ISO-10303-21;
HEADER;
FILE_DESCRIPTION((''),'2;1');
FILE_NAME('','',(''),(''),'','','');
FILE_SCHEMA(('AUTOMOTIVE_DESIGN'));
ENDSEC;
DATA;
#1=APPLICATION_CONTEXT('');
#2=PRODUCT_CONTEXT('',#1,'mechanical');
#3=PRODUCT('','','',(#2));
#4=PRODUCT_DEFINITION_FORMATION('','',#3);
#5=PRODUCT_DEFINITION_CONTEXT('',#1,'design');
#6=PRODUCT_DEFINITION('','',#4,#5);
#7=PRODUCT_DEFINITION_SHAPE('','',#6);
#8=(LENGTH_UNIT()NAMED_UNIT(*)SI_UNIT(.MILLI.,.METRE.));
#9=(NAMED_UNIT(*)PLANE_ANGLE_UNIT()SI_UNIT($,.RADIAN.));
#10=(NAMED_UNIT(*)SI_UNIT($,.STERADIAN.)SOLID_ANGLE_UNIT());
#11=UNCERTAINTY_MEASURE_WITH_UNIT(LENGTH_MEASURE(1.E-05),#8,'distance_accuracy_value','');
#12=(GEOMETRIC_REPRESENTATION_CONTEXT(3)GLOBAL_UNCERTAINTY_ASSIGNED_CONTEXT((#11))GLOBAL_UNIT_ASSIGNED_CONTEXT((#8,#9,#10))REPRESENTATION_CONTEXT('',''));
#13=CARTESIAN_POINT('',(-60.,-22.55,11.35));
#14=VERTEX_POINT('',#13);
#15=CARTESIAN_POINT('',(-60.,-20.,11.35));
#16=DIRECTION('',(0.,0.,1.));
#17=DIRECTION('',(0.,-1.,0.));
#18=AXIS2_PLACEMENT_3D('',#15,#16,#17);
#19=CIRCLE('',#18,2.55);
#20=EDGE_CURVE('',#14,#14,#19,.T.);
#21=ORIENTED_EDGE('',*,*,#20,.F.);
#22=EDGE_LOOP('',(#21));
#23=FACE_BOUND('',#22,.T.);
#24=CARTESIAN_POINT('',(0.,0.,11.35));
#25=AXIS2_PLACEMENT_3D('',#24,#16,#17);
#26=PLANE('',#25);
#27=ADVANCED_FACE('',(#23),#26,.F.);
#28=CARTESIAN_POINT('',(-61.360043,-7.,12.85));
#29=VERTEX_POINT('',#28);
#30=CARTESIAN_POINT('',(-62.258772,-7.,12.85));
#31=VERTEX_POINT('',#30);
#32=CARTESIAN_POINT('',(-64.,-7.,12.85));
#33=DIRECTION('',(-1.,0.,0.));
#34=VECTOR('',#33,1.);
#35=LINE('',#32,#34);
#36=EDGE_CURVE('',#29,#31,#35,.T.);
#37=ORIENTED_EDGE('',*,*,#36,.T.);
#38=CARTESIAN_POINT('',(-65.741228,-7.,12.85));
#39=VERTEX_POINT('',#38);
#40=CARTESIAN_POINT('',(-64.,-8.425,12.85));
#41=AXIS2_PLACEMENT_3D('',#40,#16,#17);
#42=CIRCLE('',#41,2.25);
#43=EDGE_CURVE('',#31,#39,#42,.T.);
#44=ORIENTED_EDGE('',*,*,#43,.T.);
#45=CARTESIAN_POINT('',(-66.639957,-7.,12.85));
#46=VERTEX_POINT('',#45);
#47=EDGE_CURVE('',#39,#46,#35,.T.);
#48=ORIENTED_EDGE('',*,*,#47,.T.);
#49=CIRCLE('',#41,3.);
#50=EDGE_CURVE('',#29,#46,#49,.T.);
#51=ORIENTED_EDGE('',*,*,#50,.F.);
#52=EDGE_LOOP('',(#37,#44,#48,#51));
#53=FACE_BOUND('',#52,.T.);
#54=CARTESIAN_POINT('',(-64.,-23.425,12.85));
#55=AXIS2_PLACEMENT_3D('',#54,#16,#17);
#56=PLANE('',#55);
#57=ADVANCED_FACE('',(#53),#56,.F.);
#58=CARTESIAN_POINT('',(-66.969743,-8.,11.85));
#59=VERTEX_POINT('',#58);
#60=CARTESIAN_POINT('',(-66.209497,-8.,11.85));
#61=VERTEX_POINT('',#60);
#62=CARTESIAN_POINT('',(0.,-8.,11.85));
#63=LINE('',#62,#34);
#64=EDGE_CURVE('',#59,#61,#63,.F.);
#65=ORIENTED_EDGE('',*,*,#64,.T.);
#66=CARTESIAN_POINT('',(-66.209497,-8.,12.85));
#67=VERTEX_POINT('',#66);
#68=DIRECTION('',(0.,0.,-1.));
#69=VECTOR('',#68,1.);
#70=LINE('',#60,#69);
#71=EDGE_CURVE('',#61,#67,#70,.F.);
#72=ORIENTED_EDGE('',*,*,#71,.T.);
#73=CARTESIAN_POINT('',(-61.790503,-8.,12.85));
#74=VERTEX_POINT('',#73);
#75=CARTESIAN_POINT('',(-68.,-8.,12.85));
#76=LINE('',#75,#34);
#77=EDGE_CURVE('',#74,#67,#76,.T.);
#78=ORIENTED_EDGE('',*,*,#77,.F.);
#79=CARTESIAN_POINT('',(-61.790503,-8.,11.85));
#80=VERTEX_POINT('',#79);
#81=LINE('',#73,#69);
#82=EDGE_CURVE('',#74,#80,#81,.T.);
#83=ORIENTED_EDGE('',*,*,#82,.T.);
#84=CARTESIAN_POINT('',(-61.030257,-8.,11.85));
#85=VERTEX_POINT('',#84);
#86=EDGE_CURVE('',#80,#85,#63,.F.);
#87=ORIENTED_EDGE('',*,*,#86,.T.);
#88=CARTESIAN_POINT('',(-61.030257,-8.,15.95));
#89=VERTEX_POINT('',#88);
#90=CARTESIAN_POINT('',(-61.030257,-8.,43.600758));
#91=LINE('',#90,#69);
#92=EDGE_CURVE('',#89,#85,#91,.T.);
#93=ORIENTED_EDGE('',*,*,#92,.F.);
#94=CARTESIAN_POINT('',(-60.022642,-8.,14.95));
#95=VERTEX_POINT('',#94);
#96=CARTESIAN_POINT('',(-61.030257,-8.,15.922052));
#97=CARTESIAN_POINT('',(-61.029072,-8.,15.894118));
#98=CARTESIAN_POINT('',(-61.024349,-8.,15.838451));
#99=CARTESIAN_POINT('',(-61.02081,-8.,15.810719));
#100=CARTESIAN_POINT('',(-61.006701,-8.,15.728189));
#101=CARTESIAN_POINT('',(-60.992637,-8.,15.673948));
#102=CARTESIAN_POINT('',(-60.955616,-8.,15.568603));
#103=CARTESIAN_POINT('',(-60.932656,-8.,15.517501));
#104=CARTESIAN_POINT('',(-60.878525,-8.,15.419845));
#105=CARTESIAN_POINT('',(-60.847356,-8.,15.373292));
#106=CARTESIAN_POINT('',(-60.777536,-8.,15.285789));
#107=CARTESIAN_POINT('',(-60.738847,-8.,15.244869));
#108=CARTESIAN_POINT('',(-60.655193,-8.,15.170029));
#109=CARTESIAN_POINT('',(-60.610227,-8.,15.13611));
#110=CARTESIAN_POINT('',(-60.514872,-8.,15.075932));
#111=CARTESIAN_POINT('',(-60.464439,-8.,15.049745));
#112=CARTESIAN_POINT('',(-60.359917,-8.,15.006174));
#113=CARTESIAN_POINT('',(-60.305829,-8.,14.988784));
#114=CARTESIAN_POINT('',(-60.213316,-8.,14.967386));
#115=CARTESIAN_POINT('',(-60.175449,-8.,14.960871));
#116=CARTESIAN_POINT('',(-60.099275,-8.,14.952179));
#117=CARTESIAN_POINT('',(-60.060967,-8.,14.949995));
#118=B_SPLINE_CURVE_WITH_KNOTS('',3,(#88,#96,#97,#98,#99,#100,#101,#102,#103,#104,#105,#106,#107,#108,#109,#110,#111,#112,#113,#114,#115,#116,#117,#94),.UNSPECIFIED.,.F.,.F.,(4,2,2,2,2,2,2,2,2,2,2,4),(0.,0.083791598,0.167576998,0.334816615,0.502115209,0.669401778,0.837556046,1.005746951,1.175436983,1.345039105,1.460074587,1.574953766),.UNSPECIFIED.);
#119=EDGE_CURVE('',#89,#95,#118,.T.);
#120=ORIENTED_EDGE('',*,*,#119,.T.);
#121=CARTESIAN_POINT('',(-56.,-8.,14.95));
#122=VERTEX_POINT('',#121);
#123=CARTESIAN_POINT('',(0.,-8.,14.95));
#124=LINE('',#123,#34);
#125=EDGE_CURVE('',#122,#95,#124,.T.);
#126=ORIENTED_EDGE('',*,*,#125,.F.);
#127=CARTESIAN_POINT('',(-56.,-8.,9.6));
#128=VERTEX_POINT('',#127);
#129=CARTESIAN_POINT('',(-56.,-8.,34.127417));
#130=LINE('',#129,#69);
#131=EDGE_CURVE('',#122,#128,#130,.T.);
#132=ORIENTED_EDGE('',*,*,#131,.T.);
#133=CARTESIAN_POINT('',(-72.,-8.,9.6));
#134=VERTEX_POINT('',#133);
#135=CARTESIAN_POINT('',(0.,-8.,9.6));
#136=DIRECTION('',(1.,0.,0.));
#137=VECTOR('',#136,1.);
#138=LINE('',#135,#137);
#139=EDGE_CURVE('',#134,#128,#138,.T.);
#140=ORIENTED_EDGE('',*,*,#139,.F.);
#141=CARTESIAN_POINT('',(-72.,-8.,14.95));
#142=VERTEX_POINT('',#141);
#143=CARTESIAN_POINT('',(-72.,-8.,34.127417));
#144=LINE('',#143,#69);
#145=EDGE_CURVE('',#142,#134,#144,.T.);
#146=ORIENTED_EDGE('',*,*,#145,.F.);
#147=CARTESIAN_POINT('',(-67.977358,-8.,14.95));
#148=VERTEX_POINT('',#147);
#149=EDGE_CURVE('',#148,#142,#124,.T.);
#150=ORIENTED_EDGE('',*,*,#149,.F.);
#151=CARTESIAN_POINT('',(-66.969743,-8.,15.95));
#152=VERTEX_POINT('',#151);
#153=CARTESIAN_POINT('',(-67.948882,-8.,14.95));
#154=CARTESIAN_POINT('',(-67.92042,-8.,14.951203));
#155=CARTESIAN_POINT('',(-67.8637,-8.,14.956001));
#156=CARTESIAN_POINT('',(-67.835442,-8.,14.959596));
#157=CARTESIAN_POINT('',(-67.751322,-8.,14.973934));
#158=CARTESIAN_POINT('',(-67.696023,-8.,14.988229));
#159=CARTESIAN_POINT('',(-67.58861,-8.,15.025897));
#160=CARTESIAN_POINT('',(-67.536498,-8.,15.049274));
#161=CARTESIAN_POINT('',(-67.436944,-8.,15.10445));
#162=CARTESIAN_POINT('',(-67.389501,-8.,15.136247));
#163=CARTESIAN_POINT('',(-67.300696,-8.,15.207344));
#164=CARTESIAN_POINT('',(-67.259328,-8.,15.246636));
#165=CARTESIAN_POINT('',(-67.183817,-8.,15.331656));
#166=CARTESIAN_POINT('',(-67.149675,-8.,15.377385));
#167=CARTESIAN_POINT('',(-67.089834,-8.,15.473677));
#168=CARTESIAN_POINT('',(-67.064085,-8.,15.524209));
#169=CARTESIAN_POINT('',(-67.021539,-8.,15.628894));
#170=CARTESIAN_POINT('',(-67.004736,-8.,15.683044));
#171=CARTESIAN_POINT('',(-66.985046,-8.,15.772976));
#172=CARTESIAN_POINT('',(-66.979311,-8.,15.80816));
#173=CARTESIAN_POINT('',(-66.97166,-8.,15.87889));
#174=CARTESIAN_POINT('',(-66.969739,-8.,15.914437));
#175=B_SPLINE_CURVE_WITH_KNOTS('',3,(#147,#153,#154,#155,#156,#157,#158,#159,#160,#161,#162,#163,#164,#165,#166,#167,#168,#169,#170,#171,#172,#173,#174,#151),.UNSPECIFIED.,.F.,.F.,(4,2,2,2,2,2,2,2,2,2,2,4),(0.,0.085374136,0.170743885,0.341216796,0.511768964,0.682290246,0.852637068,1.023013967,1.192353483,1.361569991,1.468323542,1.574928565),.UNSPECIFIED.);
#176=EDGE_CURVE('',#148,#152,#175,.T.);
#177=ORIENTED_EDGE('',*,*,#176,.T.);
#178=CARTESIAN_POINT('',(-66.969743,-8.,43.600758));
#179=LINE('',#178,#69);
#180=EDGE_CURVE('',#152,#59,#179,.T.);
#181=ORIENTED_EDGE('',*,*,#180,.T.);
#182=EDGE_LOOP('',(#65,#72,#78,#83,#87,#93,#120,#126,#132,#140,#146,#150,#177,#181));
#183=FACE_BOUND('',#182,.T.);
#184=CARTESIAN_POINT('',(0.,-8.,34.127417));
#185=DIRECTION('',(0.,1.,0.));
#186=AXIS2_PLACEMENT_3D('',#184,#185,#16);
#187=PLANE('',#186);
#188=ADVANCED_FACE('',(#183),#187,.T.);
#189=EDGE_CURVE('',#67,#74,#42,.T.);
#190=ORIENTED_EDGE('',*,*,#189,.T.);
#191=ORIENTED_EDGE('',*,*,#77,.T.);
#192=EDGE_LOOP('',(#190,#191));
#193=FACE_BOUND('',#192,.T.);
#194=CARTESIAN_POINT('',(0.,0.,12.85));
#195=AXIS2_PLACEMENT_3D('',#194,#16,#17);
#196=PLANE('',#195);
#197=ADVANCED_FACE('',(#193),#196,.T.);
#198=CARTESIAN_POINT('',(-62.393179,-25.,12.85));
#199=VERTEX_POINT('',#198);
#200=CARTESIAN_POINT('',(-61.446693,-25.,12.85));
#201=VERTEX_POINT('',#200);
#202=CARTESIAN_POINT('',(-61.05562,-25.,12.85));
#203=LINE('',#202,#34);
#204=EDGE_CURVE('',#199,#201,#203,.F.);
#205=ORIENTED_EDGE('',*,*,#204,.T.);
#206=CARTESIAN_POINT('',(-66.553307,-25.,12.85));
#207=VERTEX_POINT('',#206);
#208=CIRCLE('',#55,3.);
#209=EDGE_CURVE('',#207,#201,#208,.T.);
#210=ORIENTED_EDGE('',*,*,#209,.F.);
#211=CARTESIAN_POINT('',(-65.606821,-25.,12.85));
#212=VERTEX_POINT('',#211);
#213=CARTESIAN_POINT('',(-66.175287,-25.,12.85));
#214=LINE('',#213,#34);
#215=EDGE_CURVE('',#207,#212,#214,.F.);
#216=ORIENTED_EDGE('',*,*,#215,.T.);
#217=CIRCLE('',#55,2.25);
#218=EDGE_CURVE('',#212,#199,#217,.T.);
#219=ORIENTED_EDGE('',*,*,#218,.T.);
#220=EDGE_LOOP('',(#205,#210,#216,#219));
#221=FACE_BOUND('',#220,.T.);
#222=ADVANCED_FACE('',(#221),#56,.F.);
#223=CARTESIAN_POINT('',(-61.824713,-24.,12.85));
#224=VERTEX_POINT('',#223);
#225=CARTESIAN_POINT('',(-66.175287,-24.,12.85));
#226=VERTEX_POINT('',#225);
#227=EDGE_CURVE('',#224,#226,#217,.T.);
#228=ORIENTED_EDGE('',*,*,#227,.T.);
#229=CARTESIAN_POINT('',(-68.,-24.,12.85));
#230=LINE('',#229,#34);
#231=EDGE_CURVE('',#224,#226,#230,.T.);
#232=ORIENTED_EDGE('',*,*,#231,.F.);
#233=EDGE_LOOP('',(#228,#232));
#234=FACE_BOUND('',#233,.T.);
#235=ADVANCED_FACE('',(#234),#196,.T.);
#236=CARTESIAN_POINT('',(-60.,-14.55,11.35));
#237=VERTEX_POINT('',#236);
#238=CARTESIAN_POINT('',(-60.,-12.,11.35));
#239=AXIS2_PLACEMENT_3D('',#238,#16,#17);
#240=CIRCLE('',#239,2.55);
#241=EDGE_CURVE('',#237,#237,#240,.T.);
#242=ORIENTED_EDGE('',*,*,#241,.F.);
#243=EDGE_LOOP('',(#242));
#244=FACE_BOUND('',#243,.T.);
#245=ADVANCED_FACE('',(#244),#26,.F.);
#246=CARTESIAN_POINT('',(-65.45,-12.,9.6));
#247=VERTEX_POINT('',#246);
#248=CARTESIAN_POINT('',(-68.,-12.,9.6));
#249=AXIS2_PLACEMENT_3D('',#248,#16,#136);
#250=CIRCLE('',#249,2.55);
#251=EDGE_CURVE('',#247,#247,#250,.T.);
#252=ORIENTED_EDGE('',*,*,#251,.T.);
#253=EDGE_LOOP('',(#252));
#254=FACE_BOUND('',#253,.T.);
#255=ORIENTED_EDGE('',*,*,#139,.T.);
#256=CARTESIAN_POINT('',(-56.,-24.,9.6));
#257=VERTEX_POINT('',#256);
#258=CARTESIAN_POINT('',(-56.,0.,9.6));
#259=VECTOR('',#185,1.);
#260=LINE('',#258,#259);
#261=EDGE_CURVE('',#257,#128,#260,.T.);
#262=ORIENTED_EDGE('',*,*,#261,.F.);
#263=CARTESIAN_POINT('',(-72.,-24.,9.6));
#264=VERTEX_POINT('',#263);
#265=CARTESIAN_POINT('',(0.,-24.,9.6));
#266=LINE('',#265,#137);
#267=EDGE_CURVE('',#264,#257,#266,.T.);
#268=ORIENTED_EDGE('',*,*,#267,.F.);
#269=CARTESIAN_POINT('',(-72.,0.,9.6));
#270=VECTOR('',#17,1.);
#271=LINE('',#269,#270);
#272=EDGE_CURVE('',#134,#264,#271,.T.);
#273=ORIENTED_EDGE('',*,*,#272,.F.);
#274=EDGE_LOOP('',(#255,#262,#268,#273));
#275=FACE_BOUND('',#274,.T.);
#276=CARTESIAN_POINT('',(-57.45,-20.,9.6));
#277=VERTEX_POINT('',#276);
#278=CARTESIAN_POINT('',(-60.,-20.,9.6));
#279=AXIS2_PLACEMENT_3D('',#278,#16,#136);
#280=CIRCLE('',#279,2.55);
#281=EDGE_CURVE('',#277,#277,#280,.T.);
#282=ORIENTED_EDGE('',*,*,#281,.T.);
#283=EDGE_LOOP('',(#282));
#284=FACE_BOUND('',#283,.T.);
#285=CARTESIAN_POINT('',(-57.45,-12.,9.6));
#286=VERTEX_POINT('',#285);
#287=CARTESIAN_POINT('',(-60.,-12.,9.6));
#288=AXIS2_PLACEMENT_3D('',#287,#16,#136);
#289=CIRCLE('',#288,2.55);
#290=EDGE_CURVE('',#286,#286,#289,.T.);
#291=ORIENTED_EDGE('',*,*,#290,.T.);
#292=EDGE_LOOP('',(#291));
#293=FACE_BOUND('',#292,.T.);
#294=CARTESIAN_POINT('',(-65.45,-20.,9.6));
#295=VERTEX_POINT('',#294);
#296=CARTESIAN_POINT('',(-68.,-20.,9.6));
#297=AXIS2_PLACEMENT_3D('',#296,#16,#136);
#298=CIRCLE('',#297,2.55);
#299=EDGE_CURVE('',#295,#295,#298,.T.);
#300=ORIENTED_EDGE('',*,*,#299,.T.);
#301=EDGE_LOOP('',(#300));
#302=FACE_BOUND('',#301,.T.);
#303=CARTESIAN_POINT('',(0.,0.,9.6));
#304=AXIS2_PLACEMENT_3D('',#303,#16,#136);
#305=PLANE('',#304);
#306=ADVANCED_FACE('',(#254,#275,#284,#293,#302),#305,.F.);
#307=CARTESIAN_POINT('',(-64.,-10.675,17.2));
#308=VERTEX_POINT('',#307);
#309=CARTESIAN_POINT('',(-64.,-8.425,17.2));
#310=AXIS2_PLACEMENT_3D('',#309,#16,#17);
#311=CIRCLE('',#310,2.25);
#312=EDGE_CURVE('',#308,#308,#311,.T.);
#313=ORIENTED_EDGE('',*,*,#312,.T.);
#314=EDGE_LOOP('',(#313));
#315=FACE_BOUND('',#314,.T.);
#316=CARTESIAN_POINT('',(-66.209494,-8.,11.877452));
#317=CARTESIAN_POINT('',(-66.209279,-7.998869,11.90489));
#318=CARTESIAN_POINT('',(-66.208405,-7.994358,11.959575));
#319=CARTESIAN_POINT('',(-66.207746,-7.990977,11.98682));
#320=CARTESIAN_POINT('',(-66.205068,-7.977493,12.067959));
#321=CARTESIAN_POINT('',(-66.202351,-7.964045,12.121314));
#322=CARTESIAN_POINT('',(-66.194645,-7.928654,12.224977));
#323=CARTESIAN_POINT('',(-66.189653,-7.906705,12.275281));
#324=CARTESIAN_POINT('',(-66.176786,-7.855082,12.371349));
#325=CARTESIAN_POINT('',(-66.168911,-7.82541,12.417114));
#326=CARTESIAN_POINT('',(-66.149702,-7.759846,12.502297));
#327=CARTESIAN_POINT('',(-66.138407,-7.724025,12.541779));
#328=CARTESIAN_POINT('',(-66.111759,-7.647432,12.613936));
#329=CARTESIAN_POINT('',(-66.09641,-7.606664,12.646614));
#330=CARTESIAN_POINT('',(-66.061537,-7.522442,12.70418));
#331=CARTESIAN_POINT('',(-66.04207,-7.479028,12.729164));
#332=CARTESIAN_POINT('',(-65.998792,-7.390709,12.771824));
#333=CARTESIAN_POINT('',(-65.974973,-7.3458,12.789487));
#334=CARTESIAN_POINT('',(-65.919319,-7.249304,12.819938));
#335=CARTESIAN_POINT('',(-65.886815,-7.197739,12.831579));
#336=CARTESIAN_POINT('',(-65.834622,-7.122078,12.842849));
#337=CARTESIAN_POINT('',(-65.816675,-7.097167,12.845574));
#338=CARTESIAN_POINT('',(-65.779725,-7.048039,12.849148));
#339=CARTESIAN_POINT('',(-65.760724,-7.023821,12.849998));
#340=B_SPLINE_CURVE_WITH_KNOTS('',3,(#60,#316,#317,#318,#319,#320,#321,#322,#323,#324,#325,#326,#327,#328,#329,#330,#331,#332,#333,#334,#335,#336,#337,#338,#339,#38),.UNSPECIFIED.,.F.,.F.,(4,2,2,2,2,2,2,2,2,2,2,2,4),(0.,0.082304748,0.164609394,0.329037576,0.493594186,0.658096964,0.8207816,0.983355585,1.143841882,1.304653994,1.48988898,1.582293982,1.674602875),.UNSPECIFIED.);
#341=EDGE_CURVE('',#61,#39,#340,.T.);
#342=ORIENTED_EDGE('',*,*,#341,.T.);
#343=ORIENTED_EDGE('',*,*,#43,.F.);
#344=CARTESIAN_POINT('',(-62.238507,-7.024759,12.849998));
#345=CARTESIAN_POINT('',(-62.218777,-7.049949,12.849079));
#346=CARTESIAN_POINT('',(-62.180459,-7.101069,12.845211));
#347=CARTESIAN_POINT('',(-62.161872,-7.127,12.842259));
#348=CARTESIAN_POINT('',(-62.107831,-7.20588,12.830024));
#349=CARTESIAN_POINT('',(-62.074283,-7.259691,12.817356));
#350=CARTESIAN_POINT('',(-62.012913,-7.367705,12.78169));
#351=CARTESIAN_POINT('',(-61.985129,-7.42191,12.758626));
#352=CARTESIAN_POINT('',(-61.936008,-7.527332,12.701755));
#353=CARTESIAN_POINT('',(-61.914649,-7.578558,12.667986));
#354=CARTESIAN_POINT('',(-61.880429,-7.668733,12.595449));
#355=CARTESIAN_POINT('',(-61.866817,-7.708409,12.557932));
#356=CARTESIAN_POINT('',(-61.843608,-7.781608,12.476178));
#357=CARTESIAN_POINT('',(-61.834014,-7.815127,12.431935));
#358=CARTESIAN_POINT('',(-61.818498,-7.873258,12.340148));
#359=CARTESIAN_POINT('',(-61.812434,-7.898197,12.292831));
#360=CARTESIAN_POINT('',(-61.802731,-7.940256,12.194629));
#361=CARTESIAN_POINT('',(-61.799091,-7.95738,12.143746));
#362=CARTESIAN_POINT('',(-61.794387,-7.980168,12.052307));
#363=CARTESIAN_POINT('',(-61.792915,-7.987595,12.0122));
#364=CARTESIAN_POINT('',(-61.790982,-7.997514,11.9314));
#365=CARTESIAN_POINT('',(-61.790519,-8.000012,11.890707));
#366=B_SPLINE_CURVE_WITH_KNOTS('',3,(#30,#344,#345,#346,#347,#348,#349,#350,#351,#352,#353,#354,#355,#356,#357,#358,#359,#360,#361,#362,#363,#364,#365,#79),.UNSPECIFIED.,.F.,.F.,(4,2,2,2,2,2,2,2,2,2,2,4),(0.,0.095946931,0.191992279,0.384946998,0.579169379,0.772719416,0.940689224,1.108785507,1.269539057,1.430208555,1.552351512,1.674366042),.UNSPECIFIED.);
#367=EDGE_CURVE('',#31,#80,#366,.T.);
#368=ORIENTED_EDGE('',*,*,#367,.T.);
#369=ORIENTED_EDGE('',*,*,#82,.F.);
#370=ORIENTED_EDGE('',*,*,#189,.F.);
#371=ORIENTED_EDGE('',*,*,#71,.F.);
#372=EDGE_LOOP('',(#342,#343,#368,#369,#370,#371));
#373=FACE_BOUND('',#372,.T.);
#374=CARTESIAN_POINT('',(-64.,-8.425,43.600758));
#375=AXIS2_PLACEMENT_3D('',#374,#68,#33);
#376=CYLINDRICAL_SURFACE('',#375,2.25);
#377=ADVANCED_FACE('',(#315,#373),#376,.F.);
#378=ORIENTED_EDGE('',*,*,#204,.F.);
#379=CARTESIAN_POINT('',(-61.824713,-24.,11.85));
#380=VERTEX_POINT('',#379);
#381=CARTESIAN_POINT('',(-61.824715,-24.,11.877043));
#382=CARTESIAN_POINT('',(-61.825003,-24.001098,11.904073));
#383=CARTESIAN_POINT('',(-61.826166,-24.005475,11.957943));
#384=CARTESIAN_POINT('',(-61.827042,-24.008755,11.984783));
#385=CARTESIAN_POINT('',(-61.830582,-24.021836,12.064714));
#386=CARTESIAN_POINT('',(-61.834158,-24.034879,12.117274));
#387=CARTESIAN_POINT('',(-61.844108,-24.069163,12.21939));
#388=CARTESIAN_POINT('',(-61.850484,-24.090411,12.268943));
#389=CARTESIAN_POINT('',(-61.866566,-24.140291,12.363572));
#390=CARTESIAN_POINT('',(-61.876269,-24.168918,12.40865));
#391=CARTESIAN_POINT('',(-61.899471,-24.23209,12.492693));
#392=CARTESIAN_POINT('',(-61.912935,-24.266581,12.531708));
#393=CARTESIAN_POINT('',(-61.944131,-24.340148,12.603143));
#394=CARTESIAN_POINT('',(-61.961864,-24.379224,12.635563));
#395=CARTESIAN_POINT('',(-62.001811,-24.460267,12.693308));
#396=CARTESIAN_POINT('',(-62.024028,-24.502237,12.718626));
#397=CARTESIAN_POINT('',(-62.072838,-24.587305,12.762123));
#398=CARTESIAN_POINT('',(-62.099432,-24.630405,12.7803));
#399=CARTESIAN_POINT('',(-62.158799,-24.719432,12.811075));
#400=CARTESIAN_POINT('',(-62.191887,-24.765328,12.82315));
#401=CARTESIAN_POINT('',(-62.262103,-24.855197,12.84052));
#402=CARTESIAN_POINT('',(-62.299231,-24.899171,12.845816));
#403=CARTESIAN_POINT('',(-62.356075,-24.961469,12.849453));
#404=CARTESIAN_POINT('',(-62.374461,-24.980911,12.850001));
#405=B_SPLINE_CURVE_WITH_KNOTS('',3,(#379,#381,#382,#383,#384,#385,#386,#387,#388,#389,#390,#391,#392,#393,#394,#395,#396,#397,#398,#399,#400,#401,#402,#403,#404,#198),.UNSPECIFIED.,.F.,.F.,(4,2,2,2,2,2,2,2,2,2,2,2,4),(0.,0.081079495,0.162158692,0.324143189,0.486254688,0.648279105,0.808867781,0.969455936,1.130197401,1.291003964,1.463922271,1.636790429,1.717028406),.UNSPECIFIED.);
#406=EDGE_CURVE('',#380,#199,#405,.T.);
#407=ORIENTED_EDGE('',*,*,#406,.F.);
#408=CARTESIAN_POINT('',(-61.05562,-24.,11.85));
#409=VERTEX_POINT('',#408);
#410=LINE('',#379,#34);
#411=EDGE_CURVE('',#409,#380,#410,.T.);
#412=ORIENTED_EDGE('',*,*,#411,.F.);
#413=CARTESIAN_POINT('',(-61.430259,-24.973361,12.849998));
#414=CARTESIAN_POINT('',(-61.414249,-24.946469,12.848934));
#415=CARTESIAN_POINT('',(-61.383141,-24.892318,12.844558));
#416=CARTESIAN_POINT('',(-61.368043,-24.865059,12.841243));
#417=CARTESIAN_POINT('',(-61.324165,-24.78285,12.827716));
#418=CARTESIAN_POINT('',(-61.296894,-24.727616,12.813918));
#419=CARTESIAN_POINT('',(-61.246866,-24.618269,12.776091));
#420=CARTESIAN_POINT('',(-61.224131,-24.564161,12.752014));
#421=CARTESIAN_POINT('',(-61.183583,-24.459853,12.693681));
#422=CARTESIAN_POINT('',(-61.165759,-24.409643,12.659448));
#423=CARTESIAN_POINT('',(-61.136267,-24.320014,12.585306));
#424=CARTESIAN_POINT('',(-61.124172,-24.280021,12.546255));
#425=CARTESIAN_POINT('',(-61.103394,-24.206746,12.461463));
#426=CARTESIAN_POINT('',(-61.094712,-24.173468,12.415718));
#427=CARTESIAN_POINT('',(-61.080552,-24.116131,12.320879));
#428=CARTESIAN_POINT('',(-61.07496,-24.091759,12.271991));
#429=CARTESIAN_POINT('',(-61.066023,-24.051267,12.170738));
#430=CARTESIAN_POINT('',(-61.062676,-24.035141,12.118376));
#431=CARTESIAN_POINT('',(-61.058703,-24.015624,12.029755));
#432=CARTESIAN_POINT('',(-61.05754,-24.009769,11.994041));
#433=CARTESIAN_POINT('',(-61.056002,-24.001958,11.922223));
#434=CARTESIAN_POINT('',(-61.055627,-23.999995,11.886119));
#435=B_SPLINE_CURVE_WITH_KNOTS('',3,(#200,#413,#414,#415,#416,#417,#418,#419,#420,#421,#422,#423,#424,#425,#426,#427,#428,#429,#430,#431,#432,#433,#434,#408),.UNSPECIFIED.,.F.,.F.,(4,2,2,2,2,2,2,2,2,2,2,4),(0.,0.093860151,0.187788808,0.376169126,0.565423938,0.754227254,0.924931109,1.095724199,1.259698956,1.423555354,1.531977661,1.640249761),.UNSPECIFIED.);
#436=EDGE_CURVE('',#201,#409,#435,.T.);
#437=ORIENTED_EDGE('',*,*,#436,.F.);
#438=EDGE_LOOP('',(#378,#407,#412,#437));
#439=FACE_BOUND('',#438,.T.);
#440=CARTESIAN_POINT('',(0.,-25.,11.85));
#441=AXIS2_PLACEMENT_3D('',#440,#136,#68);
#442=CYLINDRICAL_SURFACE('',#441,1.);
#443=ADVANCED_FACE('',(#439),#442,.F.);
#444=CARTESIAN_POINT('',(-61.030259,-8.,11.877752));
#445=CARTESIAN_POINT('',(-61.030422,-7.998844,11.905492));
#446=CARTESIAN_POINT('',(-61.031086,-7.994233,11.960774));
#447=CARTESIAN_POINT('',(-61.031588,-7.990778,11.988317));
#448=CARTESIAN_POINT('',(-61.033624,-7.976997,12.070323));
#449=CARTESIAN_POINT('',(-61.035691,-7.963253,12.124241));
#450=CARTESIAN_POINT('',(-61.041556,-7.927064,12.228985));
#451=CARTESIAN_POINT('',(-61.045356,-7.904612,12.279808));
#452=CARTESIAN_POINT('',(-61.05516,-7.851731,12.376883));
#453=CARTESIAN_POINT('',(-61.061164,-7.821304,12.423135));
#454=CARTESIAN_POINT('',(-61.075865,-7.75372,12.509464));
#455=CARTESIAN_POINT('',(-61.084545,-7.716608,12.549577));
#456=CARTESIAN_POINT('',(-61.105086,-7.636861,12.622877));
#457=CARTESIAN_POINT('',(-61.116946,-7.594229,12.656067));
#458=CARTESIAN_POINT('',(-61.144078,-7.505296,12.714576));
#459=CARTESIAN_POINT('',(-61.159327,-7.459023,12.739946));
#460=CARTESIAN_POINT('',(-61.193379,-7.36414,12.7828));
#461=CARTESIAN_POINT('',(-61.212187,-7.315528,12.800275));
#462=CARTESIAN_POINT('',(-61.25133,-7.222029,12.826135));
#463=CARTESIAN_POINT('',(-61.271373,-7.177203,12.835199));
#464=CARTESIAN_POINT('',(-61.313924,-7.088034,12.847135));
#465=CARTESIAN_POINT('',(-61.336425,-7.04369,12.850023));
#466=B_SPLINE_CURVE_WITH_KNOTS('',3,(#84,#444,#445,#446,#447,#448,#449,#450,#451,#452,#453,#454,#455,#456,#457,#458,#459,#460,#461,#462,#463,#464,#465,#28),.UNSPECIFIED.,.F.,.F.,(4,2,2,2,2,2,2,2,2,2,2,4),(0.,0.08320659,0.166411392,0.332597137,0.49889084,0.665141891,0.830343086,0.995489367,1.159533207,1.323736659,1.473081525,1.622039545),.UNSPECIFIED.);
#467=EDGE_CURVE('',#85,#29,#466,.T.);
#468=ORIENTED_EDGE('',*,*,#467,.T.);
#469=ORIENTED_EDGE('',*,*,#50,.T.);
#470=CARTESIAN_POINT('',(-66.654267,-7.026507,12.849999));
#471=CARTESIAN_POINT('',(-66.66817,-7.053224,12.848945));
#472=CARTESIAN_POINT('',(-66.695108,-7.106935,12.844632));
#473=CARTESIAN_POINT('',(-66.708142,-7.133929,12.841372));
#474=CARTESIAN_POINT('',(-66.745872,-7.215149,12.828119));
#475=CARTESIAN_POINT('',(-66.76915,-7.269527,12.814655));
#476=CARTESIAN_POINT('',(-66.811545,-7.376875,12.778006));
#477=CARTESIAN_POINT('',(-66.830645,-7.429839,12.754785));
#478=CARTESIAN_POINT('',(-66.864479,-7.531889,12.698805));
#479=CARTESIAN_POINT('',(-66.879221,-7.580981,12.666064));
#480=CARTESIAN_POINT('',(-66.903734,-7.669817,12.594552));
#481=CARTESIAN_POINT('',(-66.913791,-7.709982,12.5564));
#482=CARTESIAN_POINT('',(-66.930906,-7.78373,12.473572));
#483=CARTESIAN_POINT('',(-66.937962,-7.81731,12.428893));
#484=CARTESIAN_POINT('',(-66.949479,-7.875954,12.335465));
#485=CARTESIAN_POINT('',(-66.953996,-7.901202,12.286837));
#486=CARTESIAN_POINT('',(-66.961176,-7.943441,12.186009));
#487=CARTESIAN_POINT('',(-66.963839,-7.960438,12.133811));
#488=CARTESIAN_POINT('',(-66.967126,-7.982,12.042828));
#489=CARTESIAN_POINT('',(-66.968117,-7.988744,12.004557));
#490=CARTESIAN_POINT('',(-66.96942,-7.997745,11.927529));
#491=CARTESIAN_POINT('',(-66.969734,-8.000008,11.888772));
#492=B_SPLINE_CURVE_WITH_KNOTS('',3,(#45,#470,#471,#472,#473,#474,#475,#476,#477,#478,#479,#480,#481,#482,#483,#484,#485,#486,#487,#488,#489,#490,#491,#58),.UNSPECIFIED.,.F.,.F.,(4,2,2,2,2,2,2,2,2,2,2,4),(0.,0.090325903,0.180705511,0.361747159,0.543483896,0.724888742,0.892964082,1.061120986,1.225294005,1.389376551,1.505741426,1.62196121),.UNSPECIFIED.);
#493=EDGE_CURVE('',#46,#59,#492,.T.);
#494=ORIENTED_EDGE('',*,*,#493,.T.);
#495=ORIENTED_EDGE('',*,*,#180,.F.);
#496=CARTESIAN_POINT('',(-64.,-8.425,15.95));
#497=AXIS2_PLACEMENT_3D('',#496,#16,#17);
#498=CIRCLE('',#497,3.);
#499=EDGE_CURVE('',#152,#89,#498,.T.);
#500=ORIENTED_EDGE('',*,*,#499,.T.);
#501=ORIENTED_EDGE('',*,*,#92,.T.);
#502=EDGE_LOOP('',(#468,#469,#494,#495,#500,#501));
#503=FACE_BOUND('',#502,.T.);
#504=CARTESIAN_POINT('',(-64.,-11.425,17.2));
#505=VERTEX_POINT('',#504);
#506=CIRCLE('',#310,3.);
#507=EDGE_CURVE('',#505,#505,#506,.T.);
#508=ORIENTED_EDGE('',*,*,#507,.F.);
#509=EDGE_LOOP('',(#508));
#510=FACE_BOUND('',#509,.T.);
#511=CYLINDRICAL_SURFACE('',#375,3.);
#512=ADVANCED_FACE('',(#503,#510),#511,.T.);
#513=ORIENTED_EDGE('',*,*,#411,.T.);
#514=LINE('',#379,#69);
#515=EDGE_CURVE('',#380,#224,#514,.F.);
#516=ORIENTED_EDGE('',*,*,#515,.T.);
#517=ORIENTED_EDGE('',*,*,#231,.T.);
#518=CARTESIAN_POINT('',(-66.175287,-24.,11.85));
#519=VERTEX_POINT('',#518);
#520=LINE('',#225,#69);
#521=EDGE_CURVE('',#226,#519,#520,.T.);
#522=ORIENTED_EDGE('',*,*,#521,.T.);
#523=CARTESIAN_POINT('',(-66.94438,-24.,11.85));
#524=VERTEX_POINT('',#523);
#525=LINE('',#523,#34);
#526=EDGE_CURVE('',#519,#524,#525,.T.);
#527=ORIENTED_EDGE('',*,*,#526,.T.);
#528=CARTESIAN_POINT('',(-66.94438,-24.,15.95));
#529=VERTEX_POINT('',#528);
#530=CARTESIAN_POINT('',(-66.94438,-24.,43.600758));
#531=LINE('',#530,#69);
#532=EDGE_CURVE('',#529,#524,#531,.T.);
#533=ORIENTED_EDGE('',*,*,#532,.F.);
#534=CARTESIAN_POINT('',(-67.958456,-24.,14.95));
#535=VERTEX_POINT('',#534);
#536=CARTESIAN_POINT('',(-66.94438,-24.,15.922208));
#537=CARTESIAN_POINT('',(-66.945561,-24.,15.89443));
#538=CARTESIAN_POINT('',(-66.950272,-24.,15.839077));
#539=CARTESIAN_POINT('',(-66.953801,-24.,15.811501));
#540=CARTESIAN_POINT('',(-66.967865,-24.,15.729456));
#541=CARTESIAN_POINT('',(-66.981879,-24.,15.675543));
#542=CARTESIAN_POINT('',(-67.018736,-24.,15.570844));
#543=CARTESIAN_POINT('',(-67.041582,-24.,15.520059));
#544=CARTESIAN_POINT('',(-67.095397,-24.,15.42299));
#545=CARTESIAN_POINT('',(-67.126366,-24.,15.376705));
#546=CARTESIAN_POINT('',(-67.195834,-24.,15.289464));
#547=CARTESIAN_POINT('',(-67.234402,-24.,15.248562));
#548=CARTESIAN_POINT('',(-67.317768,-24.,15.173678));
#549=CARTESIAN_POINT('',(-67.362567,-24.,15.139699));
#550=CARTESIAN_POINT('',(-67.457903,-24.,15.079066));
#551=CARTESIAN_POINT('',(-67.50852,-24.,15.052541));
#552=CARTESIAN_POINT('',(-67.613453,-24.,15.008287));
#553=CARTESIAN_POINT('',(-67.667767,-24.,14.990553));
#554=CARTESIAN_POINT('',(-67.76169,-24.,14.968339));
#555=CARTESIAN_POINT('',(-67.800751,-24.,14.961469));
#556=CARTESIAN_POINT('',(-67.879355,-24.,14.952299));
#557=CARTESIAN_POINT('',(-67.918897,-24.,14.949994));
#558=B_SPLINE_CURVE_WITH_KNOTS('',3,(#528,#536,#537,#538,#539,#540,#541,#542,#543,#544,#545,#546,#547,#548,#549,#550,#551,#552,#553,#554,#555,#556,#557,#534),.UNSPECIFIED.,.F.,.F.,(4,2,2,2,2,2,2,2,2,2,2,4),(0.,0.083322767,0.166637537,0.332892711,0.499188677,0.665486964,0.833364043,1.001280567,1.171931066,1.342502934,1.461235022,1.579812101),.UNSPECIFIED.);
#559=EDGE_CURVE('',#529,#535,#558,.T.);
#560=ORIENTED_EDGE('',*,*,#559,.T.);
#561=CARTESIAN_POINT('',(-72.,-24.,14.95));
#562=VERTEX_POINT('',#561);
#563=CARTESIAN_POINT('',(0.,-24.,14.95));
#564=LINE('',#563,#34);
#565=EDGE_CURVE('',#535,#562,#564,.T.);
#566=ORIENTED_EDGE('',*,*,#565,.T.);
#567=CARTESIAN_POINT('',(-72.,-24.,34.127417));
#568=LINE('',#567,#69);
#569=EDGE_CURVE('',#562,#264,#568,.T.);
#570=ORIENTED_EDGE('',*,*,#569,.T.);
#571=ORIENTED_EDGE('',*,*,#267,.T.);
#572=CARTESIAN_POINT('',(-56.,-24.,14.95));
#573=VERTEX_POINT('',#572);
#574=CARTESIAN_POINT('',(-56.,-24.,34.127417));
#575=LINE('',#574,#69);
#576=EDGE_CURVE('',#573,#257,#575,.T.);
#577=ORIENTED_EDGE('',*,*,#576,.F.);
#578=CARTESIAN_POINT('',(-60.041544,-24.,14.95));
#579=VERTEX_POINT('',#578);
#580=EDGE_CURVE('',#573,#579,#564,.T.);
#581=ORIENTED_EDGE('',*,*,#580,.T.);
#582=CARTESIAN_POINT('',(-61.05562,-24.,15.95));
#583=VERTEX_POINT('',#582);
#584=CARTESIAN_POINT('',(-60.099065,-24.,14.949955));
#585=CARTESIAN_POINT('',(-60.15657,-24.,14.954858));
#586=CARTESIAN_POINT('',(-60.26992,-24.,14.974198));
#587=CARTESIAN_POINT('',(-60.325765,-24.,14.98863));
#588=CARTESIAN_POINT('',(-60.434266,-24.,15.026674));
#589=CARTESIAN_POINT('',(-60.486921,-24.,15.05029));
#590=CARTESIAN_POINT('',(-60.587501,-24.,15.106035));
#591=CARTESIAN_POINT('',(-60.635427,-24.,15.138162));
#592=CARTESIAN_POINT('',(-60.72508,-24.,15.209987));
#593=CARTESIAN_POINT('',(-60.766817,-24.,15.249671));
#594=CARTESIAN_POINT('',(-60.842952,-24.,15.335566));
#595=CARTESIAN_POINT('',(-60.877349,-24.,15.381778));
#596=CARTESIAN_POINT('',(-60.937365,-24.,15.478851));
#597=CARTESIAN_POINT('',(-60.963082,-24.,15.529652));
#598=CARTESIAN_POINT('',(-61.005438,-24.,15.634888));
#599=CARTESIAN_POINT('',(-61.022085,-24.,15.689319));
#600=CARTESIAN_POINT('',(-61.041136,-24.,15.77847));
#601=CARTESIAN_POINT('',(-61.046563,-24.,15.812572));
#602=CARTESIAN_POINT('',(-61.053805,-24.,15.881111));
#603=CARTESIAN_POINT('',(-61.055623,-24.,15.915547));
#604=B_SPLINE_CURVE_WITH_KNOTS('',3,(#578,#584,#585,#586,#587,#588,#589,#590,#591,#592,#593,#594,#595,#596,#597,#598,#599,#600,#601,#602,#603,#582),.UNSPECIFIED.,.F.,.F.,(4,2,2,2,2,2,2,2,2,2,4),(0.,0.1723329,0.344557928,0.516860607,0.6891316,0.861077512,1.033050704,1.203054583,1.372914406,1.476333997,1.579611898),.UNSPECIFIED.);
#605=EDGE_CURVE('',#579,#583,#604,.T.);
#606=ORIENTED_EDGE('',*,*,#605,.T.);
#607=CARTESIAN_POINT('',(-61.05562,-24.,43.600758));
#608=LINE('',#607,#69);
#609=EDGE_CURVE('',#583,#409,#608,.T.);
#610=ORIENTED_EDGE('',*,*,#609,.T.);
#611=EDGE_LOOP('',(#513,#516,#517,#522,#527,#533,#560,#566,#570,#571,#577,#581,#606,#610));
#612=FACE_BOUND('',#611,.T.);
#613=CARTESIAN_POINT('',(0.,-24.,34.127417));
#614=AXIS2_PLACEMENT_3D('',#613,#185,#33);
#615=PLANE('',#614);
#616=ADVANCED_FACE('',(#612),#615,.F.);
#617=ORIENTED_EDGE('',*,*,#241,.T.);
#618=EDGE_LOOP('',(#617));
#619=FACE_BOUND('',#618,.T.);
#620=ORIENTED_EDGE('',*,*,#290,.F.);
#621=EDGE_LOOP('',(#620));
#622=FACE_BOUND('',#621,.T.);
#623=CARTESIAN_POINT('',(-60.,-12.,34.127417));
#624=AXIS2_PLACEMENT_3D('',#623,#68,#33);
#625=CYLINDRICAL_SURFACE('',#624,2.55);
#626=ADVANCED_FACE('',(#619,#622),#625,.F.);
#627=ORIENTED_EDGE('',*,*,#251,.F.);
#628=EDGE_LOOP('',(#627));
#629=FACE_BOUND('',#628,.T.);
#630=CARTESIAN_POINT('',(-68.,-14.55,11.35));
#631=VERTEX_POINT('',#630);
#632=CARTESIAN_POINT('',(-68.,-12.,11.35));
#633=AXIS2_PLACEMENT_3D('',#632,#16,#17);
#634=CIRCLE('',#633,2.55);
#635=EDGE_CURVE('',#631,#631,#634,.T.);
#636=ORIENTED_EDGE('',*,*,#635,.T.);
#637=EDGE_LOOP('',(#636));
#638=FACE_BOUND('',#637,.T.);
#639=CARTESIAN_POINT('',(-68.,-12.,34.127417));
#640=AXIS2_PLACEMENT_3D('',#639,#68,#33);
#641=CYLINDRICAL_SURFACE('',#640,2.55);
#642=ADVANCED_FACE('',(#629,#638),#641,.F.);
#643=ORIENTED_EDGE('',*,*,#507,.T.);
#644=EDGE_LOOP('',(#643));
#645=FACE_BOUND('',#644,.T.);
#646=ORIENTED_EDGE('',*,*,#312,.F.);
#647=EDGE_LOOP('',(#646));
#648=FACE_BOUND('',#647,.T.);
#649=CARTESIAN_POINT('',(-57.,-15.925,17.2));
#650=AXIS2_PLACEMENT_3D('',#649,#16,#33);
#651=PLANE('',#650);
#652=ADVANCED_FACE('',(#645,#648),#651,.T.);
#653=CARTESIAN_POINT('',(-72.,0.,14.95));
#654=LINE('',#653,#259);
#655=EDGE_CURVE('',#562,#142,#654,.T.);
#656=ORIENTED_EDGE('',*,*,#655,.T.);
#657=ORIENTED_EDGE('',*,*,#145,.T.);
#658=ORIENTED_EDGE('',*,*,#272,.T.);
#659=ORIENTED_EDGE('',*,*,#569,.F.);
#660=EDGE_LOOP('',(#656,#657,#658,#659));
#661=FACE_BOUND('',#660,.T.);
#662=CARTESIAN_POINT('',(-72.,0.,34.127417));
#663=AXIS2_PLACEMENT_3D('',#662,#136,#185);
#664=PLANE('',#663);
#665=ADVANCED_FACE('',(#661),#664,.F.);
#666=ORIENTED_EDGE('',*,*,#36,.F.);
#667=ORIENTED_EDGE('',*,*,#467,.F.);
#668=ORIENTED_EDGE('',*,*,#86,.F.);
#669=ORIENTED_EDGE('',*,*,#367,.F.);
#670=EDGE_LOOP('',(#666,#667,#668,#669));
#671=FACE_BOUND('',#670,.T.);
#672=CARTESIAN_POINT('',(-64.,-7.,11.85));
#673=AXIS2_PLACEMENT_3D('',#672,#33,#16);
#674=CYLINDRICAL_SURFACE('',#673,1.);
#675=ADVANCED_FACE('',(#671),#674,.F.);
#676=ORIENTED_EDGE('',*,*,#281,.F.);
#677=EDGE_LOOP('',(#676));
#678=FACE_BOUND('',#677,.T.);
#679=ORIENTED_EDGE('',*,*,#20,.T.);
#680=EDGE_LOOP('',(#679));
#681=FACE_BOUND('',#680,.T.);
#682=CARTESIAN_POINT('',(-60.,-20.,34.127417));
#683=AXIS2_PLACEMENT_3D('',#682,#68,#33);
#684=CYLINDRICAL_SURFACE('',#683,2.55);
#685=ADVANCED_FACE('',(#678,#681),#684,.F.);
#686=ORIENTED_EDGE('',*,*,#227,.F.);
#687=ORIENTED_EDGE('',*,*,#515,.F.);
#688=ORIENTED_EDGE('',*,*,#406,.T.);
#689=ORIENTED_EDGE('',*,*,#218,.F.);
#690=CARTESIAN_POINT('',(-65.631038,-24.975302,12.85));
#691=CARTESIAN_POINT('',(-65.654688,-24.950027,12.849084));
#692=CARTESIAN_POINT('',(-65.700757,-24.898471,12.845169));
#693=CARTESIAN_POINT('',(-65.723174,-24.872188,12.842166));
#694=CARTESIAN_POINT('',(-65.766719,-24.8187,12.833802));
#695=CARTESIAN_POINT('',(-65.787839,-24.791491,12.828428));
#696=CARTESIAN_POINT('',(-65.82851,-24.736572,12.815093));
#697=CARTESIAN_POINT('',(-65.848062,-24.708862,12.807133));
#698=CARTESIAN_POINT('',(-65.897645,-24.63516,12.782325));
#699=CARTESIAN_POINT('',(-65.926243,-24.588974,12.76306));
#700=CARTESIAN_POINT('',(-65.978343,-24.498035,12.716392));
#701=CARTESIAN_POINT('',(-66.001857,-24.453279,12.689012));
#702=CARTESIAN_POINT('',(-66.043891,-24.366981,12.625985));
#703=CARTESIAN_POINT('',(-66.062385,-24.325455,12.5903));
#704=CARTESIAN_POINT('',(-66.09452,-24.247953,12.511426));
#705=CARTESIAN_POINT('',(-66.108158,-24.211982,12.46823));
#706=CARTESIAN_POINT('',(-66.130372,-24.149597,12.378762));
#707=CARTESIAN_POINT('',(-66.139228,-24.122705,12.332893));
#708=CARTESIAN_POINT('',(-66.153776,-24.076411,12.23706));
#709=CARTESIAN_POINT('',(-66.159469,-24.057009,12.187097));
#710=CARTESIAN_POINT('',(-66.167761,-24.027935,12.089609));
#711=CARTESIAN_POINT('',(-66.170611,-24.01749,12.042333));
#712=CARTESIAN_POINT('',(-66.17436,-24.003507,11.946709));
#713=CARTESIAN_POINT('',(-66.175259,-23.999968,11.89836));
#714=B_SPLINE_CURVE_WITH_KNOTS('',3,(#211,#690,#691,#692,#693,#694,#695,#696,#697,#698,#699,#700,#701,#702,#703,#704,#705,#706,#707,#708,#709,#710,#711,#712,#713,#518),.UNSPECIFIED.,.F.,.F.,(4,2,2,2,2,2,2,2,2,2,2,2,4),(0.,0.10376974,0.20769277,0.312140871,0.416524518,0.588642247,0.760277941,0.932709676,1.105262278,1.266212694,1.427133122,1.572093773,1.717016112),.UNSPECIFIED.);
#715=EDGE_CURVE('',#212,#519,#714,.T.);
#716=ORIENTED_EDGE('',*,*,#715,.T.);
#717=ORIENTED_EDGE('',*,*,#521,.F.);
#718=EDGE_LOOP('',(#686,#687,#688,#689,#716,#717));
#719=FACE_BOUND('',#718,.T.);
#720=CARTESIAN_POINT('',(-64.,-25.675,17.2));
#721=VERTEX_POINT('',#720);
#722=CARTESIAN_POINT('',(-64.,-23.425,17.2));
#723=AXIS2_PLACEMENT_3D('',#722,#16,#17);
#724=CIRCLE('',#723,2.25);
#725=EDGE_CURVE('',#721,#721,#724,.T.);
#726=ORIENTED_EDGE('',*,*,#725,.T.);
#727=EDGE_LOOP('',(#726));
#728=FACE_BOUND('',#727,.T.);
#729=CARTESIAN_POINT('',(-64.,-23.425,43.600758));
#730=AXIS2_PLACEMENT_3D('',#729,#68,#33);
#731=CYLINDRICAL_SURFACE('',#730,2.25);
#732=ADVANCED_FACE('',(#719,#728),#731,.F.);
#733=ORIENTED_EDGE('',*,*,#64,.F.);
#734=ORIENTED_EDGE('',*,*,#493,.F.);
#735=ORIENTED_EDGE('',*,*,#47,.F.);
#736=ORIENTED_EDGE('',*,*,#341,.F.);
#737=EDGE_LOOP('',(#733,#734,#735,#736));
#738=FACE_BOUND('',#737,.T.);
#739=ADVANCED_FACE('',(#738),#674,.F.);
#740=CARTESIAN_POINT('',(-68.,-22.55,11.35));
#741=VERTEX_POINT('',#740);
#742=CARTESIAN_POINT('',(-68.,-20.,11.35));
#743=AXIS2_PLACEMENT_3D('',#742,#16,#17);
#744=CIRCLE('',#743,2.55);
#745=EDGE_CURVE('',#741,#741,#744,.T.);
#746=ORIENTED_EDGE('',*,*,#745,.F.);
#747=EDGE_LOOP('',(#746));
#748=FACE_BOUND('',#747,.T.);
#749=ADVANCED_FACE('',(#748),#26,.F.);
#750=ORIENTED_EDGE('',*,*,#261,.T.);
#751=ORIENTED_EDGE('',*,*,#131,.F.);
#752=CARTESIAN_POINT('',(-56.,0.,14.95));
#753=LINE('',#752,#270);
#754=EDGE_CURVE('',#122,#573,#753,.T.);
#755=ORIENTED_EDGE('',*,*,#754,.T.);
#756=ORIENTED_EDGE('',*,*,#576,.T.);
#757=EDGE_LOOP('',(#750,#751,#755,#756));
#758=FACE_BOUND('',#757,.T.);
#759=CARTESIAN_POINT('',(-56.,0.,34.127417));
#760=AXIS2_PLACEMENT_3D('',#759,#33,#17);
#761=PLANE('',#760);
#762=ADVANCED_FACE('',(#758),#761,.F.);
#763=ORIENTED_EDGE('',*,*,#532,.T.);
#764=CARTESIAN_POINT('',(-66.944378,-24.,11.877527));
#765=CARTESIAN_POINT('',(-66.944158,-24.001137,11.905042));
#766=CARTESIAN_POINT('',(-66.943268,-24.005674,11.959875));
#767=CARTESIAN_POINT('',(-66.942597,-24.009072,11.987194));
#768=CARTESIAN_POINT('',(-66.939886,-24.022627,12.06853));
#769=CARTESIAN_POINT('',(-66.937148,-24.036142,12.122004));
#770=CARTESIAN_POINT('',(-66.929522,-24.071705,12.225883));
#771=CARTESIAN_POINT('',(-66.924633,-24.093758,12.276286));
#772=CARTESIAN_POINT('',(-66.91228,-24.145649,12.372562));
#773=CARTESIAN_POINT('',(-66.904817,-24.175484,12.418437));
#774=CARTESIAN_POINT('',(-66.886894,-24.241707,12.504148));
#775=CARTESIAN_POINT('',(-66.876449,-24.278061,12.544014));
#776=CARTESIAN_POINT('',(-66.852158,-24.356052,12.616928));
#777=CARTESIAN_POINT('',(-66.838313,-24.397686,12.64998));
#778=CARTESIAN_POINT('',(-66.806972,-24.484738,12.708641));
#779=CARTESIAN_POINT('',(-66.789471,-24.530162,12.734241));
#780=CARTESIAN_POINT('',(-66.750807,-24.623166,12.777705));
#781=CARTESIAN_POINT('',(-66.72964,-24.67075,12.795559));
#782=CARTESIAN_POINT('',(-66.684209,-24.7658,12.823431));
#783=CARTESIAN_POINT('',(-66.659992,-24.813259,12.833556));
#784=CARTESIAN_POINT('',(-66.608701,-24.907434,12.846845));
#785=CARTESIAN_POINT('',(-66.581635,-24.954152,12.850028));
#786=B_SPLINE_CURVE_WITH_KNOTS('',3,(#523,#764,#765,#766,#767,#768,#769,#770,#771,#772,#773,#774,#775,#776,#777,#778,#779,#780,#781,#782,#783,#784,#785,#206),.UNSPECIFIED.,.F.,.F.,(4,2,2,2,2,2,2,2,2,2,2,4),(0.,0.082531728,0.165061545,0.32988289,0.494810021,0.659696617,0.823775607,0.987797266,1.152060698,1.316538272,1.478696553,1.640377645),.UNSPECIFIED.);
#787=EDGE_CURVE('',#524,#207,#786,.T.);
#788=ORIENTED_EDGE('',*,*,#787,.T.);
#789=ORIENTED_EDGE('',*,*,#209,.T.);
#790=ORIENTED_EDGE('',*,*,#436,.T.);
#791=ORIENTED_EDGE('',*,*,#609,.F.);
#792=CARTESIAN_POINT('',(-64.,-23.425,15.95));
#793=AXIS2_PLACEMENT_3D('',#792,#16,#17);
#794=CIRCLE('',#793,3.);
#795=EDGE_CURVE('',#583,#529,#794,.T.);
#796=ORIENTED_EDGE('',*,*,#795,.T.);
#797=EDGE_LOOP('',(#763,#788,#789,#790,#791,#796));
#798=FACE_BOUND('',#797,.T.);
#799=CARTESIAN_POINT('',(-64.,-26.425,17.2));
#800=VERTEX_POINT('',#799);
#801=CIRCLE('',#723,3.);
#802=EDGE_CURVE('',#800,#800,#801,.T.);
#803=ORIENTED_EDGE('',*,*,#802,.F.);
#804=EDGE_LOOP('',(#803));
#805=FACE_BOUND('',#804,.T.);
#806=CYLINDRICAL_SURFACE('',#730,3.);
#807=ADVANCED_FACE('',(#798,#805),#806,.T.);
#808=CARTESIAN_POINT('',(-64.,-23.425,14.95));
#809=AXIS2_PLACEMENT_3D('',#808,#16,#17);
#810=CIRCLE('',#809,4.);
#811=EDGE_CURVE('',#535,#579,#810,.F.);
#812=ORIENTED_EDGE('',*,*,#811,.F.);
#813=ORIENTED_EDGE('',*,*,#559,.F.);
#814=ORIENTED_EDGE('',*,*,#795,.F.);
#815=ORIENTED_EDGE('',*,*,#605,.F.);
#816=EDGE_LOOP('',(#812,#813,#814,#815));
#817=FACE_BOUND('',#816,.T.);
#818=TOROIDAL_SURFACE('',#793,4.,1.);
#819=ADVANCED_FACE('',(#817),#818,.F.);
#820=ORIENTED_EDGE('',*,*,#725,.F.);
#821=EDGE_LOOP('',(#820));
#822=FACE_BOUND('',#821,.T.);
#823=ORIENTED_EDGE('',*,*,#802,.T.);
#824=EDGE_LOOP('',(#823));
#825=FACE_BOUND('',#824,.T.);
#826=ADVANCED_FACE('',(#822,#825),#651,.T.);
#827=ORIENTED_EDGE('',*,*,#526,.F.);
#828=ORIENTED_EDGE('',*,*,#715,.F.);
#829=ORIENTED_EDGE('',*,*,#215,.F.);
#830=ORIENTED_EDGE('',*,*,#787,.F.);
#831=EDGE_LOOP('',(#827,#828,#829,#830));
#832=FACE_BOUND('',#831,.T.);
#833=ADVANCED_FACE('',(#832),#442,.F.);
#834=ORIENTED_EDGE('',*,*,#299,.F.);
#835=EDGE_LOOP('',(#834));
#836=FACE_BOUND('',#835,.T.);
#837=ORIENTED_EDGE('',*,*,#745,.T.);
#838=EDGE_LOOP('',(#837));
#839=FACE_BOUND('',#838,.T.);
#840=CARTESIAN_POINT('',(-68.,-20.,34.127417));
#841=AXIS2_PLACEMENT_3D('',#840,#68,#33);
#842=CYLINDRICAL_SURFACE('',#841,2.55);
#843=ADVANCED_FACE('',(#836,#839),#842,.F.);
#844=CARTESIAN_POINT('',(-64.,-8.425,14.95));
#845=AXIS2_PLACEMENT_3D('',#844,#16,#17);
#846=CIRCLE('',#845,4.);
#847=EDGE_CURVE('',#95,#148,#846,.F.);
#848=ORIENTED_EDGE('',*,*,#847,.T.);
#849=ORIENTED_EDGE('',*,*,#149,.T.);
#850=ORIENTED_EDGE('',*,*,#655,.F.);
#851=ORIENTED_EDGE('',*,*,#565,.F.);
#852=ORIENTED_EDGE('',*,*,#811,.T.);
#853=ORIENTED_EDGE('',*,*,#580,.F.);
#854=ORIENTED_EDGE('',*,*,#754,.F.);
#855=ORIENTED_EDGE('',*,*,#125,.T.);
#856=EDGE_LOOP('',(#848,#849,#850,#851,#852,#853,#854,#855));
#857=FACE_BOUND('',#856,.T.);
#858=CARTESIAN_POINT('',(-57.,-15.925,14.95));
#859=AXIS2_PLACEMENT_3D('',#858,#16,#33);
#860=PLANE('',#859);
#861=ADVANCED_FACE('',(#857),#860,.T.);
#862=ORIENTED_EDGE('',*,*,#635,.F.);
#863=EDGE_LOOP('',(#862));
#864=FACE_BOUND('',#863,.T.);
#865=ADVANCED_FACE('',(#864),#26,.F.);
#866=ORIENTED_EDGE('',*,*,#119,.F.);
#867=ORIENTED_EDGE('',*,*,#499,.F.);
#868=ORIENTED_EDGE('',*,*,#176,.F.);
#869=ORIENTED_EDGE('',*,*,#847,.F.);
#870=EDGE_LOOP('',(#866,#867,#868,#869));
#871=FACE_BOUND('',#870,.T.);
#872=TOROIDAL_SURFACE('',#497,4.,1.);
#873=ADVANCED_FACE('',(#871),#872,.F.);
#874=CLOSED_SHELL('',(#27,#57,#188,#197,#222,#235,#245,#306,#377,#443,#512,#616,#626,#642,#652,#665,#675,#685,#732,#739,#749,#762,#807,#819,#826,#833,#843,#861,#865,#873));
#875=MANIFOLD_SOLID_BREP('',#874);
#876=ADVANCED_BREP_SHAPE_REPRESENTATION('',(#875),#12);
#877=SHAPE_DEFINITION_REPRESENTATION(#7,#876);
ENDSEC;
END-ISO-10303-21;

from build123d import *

# Parameters (mm, degrees)
SKETCH5_W           = 16
SKETCH5_H           = 16
SKETCH5_R           = 2.55
BOSS_EXTRUDE1_DEPTH = 1.75
BOSS_EXTRUDE2_START = 1.75
SKETCH5_4_W         = 16
SKETCH5_4_H         = 16
BOSS_EXTRUDE2_DEPTH = 1.5
BOSS_EXTRUDE3_START = 3.25
SKETCH5_5_R         = 2.25
BOSS_EXTRUDE3_DEPTH = 2.1
BOSS_EXTRUDE4_START = 5.35
SKETCH5_6_R         = 3
SKETCH5_6_R_2       = 2.25
BOSS_EXTRUDE4_DEPTH = 2.25
FILLET1_R           = 1


with BuildPart() as part:
    # Sketch5 → Boss-Extrude1 (new body)
    with BuildSketch(Plane.XY.offset(9.6)):
        with Locations((-64, -16)):
            Rectangle(SKETCH5_W, SKETCH5_H)
        with Locations(Location((-68, -20, 0), (0, 0, 270))):
            Circle(SKETCH5_R, mode=Mode.SUBTRACT)
        with Locations(Location((-60, -20, 0), (0, 0, 270))):
            Circle(SKETCH5_R, mode=Mode.SUBTRACT)
        with Locations(Location((-68, -12, 0), (0, 0, 270))):
            Circle(SKETCH5_R, mode=Mode.SUBTRACT)
        with Locations(Location((-60, -12, 0), (0, 0, 270))):
            Circle(SKETCH5_R, mode=Mode.SUBTRACT)
    extrude(amount=BOSS_EXTRUDE1_DEPTH)

    # Sketch5<4> → Boss-Extrude2 (add)
    with BuildSketch(Plane.XY.offset(9.6).offset(BOSS_EXTRUDE2_START)):
        with Locations((-64, -16)):
            Rectangle(SKETCH5_4_W, SKETCH5_4_H)
    extrude(amount=BOSS_EXTRUDE2_DEPTH)

    # Sketch5<5> → Boss-Extrude3 (add)
    with BuildSketch(Plane.XY.offset(9.6).offset(BOSS_EXTRUDE3_START)):
        with BuildLine():
            Line((-66.969743255, -8), (-72, -8))
            Line((-72, -8), (-72, -24))
            Line((-72, -24), (-66.94438024, -24))
            ThreePointArc((-66.94438024, -24), (-64, -26.425), (-61.05561976, -24))
            Line((-61.05561976, -24), (-56, -24))
            Line((-56, -24), (-56, -8))
            Line((-56, -8), (-61.030256745, -8))
            ThreePointArc((-61.030256745, -8), (-64, -5.425), (-66.969743255, -8))
        make_face()
        with Locations(Location((-64, -23.425, 0), (0, 0, 194.806506912))):
            Circle(SKETCH5_5_R, mode=Mode.SUBTRACT)
        with Locations(Location((-64, -8.425, 0), (0, 0, 169.11205187))):
            Circle(SKETCH5_5_R, mode=Mode.SUBTRACT)
    extrude(amount=BOSS_EXTRUDE3_DEPTH)

    # Sketch5<6> → Boss-Extrude4 (add)
    # profile 1 of 2: a face of its own
    with BuildSketch(Plane.XY.offset(9.6).offset(BOSS_EXTRUDE4_START)):
        with Locations(Location((-64, -8.425, 0), (0, 0, 171.855699446))):
            Circle(SKETCH5_6_R)
        with Locations(Location((-64, -8.425, 0), (0, 0, 169.11205187))):
            Circle(SKETCH5_6_R_2, mode=Mode.SUBTRACT)
    # profile 2 of 2: a face of its own
    with BuildSketch(Plane.XY.offset(9.6).offset(BOSS_EXTRUDE4_START)):
        with Locations(Location((-64, -23.425, 0), (0, 0, 191.050064959))):
            Circle(SKETCH5_6_R)
        with Locations(Location((-64, -23.425, 0), (0, 0, 194.806506912))):
            Circle(SKETCH5_6_R_2, mode=Mode.SUBTRACT)
    extrude(amount=BOSS_EXTRUDE4_DEPTH)

    # Fillet1
    # the kernel refuses this fillet: 1 mm, written as the material it adds along each edge
    with BuildSketch(Plane(origin=(-64, -8.425, 14.95), x_dir=(-0.5594516759376825, 0.8288629695495621, 0), z_dir=(0.8288629695495621, 0.5594516759376825, 0))) as fillet1_piece_1_section:
        with BuildLine():
            CenterArc((3 + FILLET1_R, FILLET1_R), FILLET1_R, 180, 90)
            Line((3, FILLET1_R), (3, 0))
            Line((3, 0), (3 + FILLET1_R, 0))
        make_face()
    fillet1_piece_1 = revolve(axis=Axis((-64, -8.425, 14.95), (0, 0, 1)), revolution_arc=291.964228084, mode=Mode.PRIVATE)
    fillet1_piece_1 = split(fillet1_piece_1, bisect_by=Plane(origin=(-64, -8, 15.233484072), z_dir=(0, -1, 0)), keep=Keep.TOP, mode=Mode.PRIVATE)
    add(fillet1_piece_1)
    with BuildSketch(Plane(origin=(-64, -23.425, 14.95), x_dir=(0.516632343586421, -0.8562073472941015, 0), z_dir=(-0.8562073472941015, -0.516632343586421, 0))) as fillet1_piece_2_section:
        with BuildLine():
            CenterArc((3 + FILLET1_R, FILLET1_R), FILLET1_R, 180, 90)
            Line((3 + FILLET1_R, 0), (3, 0))
            Line((3, 0), (3, FILLET1_R))
        make_face()
    fillet1_piece_2 = revolve(axis=Axis((-64, -23.425, 14.95), (0, 0, 1)), revolution_arc=297.786748706, mode=Mode.PRIVATE)
    fillet1_piece_2 = split(fillet1_piece_2, bisect_by=Plane(origin=(-64, -24, 15.23339809), z_dir=(0, 1, 0)), keep=Keep.TOP, mode=Mode.PRIVATE)
    add(fillet1_piece_2)
    with BuildSketch(Plane(origin=(-58.55561976, -24, 12.85), x_dir=(0, 0, -1), z_dir=(-1, 0, 0))) as fillet1_piece_3_section:
        with BuildLine():
            CenterArc((FILLET1_R, FILLET1_R), FILLET1_R, 180, 90)
            Line((0, FILLET1_R), (0, 0))
            Line((0, 0), (FILLET1_R, 0))
        make_face()
    fillet1_piece_3 = extrude(amount=5.769092903, mode=Mode.PRIVATE)
    fillet1_piece_3 = fillet1_piece_3 - Plane(origin=(-64, -23.425, 12.629693614), x_dir=(-0.9667943721514972, -0.2555555555572849, 0), z_dir=(0, 0, -1)) * Cylinder(2.25, 16, mode=Mode.PRIVATE)
    fillet1_piece_3 = fillet1_piece_3 & Plane(origin=(-64, -23.425, 12.629693614), x_dir=(-0.9814600801300545, -0.19166666666665624, 0), z_dir=(0, 0, -1)) * Cylinder(3, 16, mode=Mode.PRIVATE)
    add(fillet1_piece_3)
    with BuildSketch(Plane(origin=(-63.675287337, -24, 12.85), x_dir=(0, 0, -1), z_dir=(-1, 0, 0))) as fillet1_piece_4_section:
        with BuildLine():
            CenterArc((FILLET1_R, FILLET1_R), FILLET1_R, 180, 90)
            Line((0, FILLET1_R), (0, 0))
            Line((0, 0), (FILLET1_R, 0))
        make_face()
    fillet1_piece_4 = extrude(amount=5.769092903, mode=Mode.PRIVATE)
    fillet1_piece_4 = fillet1_piece_4 - Plane(origin=(-64, -23.425, 12.629693822), x_dir=(-0.9667943721514972, -0.2555555555572849, 0), z_dir=(0, 0, -1)) * Cylinder(2.25, 16, mode=Mode.PRIVATE)
    fillet1_piece_4 = fillet1_piece_4 & Plane(origin=(-64, -23.425, 12.629693822), x_dir=(-0.9814600801300545, -0.19166666666665624, 0), z_dir=(0, 0, -1)) * Cylinder(3, 16, mode=Mode.PRIVATE)
    add(fillet1_piece_4)
    with BuildSketch(Plane(origin=(-64.290503451, -8, 12.85), x_dir=(0, 1, 0), z_dir=(1, 0, 0))) as fillet1_piece_5_section:
        with BuildLine():
            CenterArc((FILLET1_R, -FILLET1_R), FILLET1_R, 90, 90)
            Line((0, -FILLET1_R), (0, 0))
            Line((0, 0), (FILLET1_R, 0))
        make_face()
    fillet1_piece_5 = extrude(amount=5.760246706, mode=Mode.PRIVATE)
    fillet1_piece_5 = fillet1_piece_5 & Plane(origin=(-64, -8.425, 12.629046525), x_dir=(0.9899144182986506, 0.14166666666666652, 0), z_dir=(0, 0, -1)) * Cylinder(3, 16, mode=Mode.PRIVATE)
    fillet1_piece_5 = fillet1_piece_5 - Plane(origin=(-64, -8.425, 12.629046525), x_dir=(-0.9819984662183027, 0.1888888888868298, 0), z_dir=(0, 0, -1)) * Cylinder(2.25, 16, mode=Mode.PRIVATE)
    add(fillet1_piece_5)
    with BuildSketch(Plane(origin=(-69.469743255, -8, 12.85), x_dir=(0, 1, 0), z_dir=(1, 0, 0))) as fillet1_piece_6_section:
        with BuildLine():
            CenterArc((FILLET1_R, -FILLET1_R), FILLET1_R, 90, 90)
            Line((0, -FILLET1_R), (0, 0))
            Line((0, 0), (FILLET1_R, 0))
        make_face()
    fillet1_piece_6 = extrude(amount=5.760246706, mode=Mode.PRIVATE)
    fillet1_piece_6 = fillet1_piece_6 & Plane(origin=(-64, -8.425, 12.629046589), x_dir=(0.9899144182986506, 0.14166666666666652, 0), z_dir=(0, 0, -1)) * Cylinder(3, 16, mode=Mode.PRIVATE)
    fillet1_piece_6 = fillet1_piece_6 - Plane(origin=(-64, -8.425, 12.629046589), x_dir=(-0.9819984662183027, 0.1888888888868298, 0), z_dir=(0, 0, -1)) * Cylinder(2.25, 16, mode=Mode.PRIVATE)
    add(fillet1_piece_6)


solid = part.part
